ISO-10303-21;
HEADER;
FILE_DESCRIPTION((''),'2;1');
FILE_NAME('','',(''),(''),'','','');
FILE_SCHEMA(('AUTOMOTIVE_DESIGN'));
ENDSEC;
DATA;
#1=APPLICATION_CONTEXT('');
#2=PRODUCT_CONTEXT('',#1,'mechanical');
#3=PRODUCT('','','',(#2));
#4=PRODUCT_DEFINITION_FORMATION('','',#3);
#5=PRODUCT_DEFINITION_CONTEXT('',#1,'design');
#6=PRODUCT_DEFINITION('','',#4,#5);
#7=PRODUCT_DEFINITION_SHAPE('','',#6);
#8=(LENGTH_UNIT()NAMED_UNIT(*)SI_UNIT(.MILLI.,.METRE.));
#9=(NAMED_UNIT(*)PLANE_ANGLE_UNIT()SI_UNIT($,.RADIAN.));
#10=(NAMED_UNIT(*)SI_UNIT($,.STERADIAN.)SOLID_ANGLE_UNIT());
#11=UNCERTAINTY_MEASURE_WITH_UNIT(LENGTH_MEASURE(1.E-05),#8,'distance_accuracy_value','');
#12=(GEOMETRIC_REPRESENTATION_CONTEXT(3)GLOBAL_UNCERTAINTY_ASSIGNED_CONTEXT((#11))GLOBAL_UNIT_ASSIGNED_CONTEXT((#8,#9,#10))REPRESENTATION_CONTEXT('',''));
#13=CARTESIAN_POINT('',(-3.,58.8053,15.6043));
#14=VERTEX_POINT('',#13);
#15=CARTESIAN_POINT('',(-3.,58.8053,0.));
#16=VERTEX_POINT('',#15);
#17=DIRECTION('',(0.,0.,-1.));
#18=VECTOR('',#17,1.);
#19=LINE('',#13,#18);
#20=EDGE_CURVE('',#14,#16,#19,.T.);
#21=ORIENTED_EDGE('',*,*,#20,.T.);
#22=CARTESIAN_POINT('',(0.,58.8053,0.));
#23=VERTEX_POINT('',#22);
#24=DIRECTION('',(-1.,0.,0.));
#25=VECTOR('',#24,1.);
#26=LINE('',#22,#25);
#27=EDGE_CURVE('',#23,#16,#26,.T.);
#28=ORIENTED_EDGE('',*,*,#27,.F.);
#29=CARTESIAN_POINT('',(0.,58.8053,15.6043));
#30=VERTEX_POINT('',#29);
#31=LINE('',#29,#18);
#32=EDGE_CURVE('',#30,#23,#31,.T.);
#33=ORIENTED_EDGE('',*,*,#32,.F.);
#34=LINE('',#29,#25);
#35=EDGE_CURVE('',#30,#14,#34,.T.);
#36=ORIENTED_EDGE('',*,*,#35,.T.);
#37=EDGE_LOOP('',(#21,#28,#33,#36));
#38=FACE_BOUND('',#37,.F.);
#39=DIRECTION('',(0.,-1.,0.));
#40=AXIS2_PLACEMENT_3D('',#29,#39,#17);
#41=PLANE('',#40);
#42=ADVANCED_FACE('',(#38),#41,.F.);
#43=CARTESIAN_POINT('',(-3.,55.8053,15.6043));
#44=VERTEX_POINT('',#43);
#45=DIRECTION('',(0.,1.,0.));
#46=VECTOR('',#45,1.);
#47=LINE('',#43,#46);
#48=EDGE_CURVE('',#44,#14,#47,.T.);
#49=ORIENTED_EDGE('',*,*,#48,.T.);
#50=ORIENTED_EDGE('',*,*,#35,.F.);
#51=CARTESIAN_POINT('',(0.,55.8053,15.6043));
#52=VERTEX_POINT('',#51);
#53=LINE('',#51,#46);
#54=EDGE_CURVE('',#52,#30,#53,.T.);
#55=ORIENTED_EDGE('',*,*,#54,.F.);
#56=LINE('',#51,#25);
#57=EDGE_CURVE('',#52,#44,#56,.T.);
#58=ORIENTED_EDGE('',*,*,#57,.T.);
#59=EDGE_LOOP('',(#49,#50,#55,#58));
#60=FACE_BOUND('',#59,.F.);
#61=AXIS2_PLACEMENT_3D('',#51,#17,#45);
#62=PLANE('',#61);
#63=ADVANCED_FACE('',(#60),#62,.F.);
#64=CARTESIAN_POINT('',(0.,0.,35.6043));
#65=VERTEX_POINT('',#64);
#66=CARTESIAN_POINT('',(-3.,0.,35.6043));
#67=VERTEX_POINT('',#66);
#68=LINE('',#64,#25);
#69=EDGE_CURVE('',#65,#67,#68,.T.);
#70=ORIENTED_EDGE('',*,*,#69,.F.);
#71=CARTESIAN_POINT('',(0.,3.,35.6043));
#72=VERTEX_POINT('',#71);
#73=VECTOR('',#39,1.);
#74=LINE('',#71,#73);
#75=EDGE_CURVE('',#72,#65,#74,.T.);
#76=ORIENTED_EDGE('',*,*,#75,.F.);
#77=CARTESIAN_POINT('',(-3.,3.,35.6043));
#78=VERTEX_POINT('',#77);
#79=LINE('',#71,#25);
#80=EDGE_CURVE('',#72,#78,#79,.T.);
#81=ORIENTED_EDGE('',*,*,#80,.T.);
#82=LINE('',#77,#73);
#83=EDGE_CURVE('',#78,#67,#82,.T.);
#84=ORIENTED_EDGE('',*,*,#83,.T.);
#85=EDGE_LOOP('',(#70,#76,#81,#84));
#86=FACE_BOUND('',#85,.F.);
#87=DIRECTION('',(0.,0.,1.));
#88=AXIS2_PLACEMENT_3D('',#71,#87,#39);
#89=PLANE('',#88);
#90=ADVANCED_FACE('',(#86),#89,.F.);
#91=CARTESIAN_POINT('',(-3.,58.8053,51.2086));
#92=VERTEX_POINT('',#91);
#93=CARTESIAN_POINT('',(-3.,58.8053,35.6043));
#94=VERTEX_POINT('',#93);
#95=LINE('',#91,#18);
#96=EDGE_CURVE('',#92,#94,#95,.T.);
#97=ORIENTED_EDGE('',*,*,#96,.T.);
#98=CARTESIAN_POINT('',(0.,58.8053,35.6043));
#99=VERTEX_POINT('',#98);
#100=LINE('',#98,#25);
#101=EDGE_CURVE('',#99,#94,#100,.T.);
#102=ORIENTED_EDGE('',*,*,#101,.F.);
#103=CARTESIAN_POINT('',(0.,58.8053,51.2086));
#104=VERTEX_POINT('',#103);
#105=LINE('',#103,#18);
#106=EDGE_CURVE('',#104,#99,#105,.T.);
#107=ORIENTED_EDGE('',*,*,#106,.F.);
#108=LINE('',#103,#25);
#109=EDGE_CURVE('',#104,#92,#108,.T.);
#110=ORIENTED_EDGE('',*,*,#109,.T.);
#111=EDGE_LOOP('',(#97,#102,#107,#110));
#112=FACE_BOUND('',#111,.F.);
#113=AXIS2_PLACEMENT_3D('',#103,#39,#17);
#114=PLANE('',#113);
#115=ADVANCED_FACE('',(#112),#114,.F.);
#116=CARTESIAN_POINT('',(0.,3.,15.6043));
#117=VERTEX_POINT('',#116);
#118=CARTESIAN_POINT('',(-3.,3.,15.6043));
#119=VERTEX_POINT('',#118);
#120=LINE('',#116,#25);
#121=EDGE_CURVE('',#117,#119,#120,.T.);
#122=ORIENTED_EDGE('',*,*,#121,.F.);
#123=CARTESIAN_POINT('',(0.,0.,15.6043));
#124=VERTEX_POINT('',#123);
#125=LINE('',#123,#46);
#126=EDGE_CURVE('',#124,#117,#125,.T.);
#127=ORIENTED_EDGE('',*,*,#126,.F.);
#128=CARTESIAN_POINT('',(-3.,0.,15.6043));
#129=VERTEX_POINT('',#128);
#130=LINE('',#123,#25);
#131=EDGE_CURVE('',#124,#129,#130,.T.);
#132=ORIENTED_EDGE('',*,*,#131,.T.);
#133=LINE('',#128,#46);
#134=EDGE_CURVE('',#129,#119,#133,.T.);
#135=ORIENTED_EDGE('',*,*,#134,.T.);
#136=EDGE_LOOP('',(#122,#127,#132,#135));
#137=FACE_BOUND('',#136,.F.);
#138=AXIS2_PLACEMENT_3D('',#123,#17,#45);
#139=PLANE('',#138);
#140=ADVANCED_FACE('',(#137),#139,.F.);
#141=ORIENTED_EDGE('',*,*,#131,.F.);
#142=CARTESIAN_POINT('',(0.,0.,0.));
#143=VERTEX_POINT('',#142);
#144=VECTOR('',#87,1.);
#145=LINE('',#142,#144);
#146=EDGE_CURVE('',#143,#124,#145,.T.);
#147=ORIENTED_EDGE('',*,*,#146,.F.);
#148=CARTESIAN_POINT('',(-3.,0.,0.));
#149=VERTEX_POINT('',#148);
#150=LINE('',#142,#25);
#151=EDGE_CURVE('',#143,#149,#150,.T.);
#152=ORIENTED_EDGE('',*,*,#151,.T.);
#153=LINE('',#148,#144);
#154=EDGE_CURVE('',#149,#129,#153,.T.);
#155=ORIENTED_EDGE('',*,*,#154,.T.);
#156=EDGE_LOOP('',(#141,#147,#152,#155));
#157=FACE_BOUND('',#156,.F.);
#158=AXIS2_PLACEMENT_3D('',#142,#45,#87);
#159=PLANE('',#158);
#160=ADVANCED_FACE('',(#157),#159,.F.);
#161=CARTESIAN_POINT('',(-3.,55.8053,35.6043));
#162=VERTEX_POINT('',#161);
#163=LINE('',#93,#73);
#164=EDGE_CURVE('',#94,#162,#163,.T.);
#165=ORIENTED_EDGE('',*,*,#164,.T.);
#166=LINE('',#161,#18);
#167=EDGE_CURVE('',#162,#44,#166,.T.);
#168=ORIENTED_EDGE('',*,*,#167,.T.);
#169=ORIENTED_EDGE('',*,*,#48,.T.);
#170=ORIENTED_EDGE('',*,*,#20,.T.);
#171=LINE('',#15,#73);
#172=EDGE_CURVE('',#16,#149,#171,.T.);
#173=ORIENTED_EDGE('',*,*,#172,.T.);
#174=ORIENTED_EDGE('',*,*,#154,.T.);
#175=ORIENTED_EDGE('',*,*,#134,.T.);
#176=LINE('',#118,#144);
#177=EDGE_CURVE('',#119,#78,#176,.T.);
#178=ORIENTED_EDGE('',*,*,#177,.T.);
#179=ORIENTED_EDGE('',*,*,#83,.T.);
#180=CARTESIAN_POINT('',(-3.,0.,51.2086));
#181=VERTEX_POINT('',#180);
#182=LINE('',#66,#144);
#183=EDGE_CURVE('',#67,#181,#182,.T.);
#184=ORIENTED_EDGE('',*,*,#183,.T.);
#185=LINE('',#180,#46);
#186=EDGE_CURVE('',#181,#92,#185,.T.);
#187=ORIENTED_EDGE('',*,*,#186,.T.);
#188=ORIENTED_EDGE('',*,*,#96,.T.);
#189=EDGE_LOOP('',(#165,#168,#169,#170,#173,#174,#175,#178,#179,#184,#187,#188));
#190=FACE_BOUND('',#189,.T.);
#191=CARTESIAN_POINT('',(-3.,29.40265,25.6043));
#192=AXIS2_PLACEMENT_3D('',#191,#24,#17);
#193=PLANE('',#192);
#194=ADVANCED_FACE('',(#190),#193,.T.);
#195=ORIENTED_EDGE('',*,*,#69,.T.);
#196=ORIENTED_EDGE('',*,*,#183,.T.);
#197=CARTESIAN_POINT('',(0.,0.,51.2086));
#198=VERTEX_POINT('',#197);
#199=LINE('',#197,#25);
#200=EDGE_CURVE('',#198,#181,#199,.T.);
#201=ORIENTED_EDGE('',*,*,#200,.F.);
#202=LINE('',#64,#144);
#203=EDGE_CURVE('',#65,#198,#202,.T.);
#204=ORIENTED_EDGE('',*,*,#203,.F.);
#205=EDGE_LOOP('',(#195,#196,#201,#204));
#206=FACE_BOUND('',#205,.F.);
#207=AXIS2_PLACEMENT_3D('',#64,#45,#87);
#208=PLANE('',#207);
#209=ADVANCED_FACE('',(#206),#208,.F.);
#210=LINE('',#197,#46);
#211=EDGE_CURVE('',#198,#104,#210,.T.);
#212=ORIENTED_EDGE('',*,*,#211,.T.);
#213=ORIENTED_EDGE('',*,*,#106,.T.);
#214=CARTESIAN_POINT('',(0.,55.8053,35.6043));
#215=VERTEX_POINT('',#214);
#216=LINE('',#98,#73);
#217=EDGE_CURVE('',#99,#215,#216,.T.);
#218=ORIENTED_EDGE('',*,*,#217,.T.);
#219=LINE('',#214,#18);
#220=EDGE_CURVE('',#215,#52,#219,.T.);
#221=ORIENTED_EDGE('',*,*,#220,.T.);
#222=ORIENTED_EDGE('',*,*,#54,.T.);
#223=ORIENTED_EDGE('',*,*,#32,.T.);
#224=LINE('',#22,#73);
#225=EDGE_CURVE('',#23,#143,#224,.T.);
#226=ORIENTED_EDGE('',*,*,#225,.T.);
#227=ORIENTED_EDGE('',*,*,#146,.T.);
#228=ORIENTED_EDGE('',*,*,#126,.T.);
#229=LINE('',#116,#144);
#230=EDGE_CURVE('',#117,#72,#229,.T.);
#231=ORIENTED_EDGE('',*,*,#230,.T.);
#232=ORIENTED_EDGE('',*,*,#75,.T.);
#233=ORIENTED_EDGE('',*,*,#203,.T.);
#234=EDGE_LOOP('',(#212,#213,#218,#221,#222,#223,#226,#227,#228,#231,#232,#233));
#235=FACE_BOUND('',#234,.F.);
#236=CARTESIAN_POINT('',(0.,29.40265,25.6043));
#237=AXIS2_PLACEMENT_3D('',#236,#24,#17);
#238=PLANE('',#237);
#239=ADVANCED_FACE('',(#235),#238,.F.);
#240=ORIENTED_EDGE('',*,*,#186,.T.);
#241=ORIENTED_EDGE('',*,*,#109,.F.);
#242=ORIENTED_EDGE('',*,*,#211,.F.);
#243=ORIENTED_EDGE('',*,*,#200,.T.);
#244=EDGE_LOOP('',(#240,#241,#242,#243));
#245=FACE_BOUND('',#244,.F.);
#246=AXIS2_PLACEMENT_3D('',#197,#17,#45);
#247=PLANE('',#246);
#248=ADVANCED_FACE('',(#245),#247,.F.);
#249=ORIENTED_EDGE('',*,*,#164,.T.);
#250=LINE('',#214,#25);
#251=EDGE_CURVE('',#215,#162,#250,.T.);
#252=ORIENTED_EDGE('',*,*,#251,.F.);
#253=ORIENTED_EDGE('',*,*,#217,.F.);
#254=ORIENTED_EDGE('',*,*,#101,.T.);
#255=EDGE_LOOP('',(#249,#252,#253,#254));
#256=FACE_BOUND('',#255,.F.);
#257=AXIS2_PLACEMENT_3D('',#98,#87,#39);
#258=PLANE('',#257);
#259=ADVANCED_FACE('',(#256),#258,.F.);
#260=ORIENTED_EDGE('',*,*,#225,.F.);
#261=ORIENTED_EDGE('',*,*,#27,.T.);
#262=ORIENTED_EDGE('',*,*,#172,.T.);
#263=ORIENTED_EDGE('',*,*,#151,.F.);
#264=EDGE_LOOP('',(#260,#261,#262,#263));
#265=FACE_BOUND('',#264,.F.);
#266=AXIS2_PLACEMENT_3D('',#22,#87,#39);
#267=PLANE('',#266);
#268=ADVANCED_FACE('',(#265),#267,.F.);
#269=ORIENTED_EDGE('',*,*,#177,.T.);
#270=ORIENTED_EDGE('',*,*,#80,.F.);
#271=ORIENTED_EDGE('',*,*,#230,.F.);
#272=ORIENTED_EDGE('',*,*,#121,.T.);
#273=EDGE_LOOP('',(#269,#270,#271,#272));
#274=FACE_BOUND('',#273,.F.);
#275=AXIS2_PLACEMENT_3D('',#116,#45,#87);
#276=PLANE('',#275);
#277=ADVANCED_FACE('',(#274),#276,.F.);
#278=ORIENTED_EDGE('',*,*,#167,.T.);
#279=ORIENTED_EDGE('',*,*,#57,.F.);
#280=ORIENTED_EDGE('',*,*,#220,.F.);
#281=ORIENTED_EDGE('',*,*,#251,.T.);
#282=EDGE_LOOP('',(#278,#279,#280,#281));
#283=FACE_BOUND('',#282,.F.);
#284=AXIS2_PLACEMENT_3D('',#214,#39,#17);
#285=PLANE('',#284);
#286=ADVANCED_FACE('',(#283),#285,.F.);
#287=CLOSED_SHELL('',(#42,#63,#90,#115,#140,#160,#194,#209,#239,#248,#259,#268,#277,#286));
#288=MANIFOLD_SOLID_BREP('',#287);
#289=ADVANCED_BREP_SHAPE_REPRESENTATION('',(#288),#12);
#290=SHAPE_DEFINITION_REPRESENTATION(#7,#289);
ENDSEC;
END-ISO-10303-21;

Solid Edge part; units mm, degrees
sketch "Sketch1" plane through (0, 0, 0) normal (1, 0, 0) x (0, 1, 0)
  line L0 (3, 15.6043) -> (3, 35.6043)
  line L1 (3, 35.6043) -> (0, 35.6043)
  line L2 (0, 35.6043) -> (0, 51.2086)
  line L3 (0, 51.2086) -> (58.8053, 51.2086)
  line L4 (58.8053, 51.2086) -> (58.8053, 35.6043)
  line L5 (58.8053, 35.6043) -> (55.8053, 35.6043)
  line L6 (55.8053, 35.6043) -> (55.8053, 15.6043)
  line L7 (55.8053, 15.6043) -> (58.8053, 15.6043)
  line L8 (58.8053, 15.6043) -> (58.8053, 0)
  line L9 (58.8053, 0) -> (0, 0)
  line L10 (0, 0) -> (0, 15.6043)
  line L11 (0, 15.6043) -> (3, 15.6043)
extrude "Protrusion1" add sketch "Sketch1" against normal blind 3
properties material "Acier"
